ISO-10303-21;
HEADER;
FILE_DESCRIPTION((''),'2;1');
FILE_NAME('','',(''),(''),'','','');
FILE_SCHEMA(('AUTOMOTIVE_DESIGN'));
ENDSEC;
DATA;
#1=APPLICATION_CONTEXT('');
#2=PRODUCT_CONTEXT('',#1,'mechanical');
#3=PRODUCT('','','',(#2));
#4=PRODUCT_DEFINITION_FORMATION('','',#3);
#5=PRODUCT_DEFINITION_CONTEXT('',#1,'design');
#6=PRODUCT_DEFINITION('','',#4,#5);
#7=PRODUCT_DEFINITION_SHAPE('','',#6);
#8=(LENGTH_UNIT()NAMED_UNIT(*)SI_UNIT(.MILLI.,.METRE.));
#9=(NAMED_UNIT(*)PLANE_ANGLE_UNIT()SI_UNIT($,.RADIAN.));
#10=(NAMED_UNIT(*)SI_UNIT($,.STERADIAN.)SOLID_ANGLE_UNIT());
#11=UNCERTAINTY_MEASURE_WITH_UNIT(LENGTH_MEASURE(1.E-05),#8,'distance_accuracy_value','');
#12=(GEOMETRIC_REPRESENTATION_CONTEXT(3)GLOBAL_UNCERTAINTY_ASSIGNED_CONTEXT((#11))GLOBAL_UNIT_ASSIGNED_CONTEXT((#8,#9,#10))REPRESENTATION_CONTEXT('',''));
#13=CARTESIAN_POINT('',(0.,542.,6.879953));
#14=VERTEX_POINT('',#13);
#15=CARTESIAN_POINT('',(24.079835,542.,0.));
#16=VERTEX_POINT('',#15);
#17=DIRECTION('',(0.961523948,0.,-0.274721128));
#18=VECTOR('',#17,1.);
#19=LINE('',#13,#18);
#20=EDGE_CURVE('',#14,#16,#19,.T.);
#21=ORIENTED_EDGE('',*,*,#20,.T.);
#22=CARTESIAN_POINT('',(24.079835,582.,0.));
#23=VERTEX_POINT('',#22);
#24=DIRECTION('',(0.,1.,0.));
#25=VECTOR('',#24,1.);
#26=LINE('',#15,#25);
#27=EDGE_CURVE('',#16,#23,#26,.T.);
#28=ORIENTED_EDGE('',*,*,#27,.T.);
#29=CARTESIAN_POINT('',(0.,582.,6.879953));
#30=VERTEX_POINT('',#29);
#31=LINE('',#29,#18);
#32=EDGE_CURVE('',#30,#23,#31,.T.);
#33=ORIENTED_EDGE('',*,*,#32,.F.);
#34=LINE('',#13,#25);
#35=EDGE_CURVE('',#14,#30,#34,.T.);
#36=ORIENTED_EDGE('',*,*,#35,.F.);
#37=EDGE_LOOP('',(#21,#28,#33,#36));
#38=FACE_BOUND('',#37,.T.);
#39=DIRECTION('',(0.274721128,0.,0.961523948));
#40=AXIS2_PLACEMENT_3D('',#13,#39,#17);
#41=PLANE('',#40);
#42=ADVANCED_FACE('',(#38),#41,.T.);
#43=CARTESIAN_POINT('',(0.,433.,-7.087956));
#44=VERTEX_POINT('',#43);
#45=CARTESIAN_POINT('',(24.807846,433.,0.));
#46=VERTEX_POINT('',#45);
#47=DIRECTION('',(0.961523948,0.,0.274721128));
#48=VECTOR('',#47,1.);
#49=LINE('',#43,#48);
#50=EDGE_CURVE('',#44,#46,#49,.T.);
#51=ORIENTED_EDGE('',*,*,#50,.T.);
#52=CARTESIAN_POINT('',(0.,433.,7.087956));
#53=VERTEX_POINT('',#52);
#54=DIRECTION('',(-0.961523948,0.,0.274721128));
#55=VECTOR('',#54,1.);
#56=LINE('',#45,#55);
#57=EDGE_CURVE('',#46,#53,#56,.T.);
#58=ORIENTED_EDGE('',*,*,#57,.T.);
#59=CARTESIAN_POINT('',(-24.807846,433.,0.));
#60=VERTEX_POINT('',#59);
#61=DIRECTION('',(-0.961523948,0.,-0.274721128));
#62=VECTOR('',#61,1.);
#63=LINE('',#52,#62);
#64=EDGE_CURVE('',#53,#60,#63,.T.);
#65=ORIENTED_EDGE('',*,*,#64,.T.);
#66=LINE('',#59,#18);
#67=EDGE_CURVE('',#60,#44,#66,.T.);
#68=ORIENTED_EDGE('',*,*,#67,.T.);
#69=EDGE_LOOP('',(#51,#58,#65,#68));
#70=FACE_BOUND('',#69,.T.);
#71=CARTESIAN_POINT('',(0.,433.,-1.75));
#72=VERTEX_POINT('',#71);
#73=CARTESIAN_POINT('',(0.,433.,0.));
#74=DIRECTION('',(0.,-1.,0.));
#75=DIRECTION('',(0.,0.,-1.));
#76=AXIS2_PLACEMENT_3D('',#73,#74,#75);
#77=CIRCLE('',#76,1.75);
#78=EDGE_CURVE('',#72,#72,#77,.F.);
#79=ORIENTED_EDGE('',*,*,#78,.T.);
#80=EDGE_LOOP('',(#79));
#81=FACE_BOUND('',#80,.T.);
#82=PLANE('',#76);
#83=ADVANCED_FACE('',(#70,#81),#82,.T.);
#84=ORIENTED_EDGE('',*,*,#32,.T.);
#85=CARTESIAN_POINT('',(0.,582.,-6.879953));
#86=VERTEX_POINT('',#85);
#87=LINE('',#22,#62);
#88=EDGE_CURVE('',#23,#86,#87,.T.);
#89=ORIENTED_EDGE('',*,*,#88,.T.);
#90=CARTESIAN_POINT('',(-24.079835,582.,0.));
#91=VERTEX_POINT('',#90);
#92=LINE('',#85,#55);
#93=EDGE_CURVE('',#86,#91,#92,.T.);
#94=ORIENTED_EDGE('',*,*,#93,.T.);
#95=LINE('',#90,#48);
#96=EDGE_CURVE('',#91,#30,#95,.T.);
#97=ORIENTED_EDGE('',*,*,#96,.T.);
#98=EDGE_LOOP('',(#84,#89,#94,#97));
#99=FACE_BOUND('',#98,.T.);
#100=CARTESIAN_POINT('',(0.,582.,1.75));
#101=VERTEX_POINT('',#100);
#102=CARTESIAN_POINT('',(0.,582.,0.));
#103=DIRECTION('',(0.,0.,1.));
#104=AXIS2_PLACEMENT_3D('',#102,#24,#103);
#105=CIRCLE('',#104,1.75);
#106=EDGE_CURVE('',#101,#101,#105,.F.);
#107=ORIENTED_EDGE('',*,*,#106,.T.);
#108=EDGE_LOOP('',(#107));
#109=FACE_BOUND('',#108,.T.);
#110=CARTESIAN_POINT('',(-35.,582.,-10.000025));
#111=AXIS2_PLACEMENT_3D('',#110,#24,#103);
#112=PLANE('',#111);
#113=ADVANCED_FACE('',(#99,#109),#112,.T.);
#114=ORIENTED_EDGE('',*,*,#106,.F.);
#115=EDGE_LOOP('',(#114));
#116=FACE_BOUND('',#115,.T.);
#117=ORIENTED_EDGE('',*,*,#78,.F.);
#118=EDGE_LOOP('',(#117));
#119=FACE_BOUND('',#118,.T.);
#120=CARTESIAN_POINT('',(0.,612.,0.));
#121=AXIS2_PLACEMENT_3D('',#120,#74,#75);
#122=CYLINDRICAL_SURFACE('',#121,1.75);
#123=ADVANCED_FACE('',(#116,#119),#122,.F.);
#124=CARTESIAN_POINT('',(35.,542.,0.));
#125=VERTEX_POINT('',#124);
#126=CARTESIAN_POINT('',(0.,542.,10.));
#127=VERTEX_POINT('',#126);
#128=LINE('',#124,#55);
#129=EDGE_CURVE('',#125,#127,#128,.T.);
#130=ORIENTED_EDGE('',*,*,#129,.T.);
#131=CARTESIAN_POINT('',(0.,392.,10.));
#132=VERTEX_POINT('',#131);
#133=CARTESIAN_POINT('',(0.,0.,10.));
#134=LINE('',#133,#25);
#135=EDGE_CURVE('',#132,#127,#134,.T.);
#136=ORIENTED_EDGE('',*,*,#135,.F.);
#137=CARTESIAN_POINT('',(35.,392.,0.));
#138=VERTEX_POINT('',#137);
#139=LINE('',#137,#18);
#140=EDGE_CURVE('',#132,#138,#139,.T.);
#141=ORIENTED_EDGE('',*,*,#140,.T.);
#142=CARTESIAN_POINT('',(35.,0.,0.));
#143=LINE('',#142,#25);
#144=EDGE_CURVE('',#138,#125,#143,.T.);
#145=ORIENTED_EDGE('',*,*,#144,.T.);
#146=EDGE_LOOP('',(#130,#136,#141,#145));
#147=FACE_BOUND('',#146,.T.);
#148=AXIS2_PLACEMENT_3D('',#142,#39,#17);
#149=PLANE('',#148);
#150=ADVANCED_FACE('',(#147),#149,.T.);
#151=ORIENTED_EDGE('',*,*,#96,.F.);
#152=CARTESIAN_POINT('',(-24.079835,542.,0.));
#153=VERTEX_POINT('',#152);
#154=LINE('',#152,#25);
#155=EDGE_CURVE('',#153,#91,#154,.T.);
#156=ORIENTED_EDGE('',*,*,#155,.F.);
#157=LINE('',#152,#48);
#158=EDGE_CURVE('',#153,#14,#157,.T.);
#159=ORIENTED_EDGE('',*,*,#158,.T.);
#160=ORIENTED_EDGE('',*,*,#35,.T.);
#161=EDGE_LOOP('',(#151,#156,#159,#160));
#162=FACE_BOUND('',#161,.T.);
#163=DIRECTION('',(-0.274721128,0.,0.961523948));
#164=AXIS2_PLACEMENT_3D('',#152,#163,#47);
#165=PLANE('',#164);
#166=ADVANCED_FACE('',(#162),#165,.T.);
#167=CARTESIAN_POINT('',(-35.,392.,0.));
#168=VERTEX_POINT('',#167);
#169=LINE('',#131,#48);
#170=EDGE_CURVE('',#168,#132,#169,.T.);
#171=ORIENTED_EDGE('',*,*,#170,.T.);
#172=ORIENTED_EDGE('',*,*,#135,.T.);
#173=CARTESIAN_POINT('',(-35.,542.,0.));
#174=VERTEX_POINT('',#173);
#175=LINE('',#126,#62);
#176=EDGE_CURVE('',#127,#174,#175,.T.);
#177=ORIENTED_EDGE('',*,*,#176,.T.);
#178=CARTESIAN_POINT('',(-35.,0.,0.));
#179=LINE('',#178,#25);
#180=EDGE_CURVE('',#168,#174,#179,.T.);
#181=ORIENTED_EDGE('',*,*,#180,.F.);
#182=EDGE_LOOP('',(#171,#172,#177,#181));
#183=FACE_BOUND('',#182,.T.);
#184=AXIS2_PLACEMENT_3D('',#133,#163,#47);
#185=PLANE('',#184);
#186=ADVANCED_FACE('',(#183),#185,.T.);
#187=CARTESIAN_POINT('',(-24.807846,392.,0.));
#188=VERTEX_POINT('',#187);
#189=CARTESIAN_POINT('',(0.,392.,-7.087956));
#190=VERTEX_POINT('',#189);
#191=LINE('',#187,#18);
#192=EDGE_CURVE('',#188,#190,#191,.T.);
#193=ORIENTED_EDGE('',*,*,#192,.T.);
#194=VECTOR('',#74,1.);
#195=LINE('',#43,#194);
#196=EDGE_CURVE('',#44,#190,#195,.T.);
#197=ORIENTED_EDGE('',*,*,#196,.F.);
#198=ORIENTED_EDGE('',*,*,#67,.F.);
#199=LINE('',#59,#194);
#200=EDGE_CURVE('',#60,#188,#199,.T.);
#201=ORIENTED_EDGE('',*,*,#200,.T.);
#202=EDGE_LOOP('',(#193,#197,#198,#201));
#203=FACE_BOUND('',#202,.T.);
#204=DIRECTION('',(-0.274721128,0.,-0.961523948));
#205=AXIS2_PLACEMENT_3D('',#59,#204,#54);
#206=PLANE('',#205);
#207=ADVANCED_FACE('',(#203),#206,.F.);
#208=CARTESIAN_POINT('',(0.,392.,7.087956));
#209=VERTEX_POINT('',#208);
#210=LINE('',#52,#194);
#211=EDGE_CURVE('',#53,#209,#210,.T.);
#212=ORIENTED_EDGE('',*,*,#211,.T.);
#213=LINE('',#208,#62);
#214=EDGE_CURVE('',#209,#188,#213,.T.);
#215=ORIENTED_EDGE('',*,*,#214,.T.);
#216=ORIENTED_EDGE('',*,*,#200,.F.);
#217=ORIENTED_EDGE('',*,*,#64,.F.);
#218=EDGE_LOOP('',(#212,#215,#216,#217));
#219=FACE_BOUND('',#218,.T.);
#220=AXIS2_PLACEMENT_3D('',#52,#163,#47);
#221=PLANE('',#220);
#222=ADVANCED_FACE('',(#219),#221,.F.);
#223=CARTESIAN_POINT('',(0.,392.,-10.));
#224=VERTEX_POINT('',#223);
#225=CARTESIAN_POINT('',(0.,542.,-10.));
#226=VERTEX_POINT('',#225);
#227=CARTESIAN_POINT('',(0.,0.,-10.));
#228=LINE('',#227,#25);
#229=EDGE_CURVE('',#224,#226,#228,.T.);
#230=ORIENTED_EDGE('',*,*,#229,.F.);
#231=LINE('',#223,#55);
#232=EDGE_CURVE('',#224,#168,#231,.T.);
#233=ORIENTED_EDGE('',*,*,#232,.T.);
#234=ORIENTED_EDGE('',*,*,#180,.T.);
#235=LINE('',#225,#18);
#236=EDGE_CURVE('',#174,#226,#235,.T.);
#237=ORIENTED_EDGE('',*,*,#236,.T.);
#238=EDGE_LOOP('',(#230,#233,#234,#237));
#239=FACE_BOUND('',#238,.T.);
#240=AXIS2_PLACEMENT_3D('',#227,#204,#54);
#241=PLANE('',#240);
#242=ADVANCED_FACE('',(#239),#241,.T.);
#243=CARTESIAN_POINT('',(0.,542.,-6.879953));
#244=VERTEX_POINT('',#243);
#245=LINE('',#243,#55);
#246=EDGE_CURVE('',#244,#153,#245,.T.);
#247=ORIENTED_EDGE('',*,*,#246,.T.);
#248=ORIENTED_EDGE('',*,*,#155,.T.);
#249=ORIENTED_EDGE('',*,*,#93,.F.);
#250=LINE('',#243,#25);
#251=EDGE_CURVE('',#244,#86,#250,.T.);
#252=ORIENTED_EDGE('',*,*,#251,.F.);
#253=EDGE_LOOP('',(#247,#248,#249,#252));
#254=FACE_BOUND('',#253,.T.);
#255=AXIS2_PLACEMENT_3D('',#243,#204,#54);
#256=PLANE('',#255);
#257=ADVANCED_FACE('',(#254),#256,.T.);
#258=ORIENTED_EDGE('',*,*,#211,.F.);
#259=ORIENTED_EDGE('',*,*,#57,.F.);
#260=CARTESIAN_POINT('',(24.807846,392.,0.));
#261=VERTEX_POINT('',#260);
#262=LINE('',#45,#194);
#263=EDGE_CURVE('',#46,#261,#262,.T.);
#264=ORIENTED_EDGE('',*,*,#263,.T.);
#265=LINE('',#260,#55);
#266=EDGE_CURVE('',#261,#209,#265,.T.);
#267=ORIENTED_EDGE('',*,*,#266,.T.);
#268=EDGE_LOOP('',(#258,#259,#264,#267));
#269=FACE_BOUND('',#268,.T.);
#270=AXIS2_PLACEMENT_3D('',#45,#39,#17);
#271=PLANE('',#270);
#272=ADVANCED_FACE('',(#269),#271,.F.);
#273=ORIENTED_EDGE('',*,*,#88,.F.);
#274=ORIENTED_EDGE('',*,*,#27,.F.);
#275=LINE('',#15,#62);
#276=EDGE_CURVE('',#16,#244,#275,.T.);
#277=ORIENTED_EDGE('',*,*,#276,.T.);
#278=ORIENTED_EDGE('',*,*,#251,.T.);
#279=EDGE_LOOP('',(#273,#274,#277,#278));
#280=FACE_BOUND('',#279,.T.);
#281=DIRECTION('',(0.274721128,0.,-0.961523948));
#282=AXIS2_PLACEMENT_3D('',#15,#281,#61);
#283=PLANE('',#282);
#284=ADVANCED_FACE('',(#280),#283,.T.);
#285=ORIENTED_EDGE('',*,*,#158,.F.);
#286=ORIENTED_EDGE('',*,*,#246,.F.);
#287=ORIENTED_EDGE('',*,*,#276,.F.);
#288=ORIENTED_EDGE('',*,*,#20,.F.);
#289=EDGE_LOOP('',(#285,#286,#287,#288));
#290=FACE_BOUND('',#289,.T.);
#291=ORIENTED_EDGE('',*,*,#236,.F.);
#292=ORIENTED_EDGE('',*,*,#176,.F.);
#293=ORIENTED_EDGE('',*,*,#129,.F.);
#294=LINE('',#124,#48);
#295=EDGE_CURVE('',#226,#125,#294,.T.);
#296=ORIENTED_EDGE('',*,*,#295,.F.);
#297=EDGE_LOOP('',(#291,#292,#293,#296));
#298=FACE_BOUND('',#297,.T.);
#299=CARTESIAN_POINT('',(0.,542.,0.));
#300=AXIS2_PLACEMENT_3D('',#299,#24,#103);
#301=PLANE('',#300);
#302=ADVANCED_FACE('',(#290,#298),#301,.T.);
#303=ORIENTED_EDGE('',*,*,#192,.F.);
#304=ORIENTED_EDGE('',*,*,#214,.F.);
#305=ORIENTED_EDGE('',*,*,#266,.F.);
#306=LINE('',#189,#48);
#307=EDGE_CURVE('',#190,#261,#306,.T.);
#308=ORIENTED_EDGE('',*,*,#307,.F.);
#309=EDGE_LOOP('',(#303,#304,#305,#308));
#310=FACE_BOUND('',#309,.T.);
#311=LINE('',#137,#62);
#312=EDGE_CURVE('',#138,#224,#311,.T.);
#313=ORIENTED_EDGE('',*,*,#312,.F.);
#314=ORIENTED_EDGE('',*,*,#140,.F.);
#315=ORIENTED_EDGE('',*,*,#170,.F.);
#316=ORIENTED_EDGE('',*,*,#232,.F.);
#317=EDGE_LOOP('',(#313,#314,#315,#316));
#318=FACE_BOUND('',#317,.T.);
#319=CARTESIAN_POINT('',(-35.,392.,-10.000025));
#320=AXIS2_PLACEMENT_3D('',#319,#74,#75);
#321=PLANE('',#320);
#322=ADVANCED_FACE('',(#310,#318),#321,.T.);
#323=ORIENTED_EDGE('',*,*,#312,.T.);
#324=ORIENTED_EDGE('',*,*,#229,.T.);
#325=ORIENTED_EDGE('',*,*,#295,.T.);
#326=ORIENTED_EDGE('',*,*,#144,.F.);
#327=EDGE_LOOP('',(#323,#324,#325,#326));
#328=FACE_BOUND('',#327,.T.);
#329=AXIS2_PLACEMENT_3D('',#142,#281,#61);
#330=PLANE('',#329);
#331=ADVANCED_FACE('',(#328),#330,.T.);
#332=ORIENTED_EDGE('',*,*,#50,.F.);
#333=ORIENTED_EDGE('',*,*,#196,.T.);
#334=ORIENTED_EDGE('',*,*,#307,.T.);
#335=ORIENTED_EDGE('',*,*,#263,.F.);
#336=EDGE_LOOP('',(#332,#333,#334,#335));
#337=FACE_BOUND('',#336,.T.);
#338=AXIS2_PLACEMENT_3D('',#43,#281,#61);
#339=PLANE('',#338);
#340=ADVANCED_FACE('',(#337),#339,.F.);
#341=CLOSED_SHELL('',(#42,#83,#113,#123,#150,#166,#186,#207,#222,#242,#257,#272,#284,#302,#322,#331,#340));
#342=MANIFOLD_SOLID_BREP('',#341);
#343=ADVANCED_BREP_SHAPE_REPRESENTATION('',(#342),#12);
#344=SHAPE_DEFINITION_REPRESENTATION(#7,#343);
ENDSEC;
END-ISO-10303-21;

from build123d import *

# Parameters (mm, degrees)
SWEEP_1_DEPTH            = 610
CUT_EXTRUDE_2_DEPTH      = 12
SKETCH_21_R              = 1.75
CUT_EXTRUDE_3_DEPTH      = 600
CUT_EXTRUDE_4_DEPTH      = 691.959477934
CUT_EXTRUDE_4_DEPTH_BACK = 691.959477934
SKETCH_26_OUTSIDE_W      = 208.38
SKETCH_26_OUTSIDE_H      = 816.38
SKETCH_26_OUTSIDE_W_2    = 70
SKETCH_26_OUTSIDE_H_2    = 190
CUT_EXTRUDE_5_DEPTH      = 41
SKETCH_28_OUTSIDE_W      = 112.694
SKETCH_28_OUTSIDE_H      = 62.694
CUT_EXTRUDE_7_DEPTH      = 40


# Read off the part's stored shape, not the designer's step: 扫描1
with BuildPart() as part:
    # 扫描1 outline → 扫描1 (new body)
    with BuildSketch(Plane(origin=(0, 0, 0), x_dir=(1, 0, 0), z_dir=(0, 1, 0))):
        Polygon((-35, 0), (35, 0), (0, 10), align=None)
    sweep_1 = extrude(amount=SWEEP_1_DEPTH)

    # 草图1 → 放样1 section 0
    with BuildSketch(Plane.XY, mode=Mode.PRIVATE) as loft_1_s0:
        with BuildLine():
            Line((-35, 610), (0, 690))
            Line((0, 690), (35, 610))
            Line((35, 610), (-35, 610))
        make_face()
    loft_1 = loft([Vertex(0, 610, -10), loft_1_s0.sketch])

    # 镜向1: 扫描1, 放样1 across plane
    add(sweep_1.mirror(Plane.XY))
    add(loft_1.mirror(Plane.XY))

    # 草图19 → 切除-拉伸2 (cut)
    with BuildSketch(Plane.XZ):
        Polygon((0, -10), (35, 0), (0, 10), (-35, 0), align=None)
    extrude(amount=-CUT_EXTRUDE_2_DEPTH, mode=Mode.SUBTRACT)

    # 草图21 → 切除-拉伸3 (cut)
    with BuildSketch(Plane.XZ.offset(-12)):
        with Locations(Location((0, 0, 0), (0, 0, 270))):
            Circle(SKETCH_21_R)
    extrude(amount=-CUT_EXTRUDE_3_DEPTH, mode=Mode.SUBTRACT)

    # 草图26 outside → 切除-拉伸4 (cut, two sides: drawn at the far end of the back side and taken through both)
    with BuildSketch(Plane.XY.offset(-CUT_EXTRUDE_4_DEPTH_BACK)):
        with Locations((0, 351)):
            Rectangle(SKETCH_26_OUTSIDE_W, SKETCH_26_OUTSIDE_H)
        with Locations((0, 487)):
            Rectangle(SKETCH_26_OUTSIDE_W_2, SKETCH_26_OUTSIDE_H_2, mode=Mode.SUBTRACT)
    extrude(amount=CUT_EXTRUDE_4_DEPTH + CUT_EXTRUDE_4_DEPTH_BACK, mode=Mode.SUBTRACT)

    # 草图27 → 切除-拉伸5 (cut)
    with BuildSketch(Plane.XZ.offset(-392)):
        Polygon((24.807846155, 0), (0, 7.087956044), (-24.807846155, 0), (0, -7.087956044), align=None)
    extrude(amount=-CUT_EXTRUDE_5_DEPTH, mode=Mode.SUBTRACT)

    # 草图28 outside → 切除-拉伸7 (cut)
    with BuildSketch(Plane(origin=(0, 582, 0), x_dir=(1, 0, 0), z_dir=(0, 1, 0))):
        Rectangle(SKETCH_28_OUTSIDE_W, SKETCH_28_OUTSIDE_H)
        Polygon((0, 6.879952905), (-24.079835166, 0), (0, -6.879952905), (24.079835166, 0), align=None, mode=Mode.SUBTRACT)
    extrude(amount=-CUT_EXTRUDE_7_DEPTH, mode=Mode.SUBTRACT)


solid = part.part
